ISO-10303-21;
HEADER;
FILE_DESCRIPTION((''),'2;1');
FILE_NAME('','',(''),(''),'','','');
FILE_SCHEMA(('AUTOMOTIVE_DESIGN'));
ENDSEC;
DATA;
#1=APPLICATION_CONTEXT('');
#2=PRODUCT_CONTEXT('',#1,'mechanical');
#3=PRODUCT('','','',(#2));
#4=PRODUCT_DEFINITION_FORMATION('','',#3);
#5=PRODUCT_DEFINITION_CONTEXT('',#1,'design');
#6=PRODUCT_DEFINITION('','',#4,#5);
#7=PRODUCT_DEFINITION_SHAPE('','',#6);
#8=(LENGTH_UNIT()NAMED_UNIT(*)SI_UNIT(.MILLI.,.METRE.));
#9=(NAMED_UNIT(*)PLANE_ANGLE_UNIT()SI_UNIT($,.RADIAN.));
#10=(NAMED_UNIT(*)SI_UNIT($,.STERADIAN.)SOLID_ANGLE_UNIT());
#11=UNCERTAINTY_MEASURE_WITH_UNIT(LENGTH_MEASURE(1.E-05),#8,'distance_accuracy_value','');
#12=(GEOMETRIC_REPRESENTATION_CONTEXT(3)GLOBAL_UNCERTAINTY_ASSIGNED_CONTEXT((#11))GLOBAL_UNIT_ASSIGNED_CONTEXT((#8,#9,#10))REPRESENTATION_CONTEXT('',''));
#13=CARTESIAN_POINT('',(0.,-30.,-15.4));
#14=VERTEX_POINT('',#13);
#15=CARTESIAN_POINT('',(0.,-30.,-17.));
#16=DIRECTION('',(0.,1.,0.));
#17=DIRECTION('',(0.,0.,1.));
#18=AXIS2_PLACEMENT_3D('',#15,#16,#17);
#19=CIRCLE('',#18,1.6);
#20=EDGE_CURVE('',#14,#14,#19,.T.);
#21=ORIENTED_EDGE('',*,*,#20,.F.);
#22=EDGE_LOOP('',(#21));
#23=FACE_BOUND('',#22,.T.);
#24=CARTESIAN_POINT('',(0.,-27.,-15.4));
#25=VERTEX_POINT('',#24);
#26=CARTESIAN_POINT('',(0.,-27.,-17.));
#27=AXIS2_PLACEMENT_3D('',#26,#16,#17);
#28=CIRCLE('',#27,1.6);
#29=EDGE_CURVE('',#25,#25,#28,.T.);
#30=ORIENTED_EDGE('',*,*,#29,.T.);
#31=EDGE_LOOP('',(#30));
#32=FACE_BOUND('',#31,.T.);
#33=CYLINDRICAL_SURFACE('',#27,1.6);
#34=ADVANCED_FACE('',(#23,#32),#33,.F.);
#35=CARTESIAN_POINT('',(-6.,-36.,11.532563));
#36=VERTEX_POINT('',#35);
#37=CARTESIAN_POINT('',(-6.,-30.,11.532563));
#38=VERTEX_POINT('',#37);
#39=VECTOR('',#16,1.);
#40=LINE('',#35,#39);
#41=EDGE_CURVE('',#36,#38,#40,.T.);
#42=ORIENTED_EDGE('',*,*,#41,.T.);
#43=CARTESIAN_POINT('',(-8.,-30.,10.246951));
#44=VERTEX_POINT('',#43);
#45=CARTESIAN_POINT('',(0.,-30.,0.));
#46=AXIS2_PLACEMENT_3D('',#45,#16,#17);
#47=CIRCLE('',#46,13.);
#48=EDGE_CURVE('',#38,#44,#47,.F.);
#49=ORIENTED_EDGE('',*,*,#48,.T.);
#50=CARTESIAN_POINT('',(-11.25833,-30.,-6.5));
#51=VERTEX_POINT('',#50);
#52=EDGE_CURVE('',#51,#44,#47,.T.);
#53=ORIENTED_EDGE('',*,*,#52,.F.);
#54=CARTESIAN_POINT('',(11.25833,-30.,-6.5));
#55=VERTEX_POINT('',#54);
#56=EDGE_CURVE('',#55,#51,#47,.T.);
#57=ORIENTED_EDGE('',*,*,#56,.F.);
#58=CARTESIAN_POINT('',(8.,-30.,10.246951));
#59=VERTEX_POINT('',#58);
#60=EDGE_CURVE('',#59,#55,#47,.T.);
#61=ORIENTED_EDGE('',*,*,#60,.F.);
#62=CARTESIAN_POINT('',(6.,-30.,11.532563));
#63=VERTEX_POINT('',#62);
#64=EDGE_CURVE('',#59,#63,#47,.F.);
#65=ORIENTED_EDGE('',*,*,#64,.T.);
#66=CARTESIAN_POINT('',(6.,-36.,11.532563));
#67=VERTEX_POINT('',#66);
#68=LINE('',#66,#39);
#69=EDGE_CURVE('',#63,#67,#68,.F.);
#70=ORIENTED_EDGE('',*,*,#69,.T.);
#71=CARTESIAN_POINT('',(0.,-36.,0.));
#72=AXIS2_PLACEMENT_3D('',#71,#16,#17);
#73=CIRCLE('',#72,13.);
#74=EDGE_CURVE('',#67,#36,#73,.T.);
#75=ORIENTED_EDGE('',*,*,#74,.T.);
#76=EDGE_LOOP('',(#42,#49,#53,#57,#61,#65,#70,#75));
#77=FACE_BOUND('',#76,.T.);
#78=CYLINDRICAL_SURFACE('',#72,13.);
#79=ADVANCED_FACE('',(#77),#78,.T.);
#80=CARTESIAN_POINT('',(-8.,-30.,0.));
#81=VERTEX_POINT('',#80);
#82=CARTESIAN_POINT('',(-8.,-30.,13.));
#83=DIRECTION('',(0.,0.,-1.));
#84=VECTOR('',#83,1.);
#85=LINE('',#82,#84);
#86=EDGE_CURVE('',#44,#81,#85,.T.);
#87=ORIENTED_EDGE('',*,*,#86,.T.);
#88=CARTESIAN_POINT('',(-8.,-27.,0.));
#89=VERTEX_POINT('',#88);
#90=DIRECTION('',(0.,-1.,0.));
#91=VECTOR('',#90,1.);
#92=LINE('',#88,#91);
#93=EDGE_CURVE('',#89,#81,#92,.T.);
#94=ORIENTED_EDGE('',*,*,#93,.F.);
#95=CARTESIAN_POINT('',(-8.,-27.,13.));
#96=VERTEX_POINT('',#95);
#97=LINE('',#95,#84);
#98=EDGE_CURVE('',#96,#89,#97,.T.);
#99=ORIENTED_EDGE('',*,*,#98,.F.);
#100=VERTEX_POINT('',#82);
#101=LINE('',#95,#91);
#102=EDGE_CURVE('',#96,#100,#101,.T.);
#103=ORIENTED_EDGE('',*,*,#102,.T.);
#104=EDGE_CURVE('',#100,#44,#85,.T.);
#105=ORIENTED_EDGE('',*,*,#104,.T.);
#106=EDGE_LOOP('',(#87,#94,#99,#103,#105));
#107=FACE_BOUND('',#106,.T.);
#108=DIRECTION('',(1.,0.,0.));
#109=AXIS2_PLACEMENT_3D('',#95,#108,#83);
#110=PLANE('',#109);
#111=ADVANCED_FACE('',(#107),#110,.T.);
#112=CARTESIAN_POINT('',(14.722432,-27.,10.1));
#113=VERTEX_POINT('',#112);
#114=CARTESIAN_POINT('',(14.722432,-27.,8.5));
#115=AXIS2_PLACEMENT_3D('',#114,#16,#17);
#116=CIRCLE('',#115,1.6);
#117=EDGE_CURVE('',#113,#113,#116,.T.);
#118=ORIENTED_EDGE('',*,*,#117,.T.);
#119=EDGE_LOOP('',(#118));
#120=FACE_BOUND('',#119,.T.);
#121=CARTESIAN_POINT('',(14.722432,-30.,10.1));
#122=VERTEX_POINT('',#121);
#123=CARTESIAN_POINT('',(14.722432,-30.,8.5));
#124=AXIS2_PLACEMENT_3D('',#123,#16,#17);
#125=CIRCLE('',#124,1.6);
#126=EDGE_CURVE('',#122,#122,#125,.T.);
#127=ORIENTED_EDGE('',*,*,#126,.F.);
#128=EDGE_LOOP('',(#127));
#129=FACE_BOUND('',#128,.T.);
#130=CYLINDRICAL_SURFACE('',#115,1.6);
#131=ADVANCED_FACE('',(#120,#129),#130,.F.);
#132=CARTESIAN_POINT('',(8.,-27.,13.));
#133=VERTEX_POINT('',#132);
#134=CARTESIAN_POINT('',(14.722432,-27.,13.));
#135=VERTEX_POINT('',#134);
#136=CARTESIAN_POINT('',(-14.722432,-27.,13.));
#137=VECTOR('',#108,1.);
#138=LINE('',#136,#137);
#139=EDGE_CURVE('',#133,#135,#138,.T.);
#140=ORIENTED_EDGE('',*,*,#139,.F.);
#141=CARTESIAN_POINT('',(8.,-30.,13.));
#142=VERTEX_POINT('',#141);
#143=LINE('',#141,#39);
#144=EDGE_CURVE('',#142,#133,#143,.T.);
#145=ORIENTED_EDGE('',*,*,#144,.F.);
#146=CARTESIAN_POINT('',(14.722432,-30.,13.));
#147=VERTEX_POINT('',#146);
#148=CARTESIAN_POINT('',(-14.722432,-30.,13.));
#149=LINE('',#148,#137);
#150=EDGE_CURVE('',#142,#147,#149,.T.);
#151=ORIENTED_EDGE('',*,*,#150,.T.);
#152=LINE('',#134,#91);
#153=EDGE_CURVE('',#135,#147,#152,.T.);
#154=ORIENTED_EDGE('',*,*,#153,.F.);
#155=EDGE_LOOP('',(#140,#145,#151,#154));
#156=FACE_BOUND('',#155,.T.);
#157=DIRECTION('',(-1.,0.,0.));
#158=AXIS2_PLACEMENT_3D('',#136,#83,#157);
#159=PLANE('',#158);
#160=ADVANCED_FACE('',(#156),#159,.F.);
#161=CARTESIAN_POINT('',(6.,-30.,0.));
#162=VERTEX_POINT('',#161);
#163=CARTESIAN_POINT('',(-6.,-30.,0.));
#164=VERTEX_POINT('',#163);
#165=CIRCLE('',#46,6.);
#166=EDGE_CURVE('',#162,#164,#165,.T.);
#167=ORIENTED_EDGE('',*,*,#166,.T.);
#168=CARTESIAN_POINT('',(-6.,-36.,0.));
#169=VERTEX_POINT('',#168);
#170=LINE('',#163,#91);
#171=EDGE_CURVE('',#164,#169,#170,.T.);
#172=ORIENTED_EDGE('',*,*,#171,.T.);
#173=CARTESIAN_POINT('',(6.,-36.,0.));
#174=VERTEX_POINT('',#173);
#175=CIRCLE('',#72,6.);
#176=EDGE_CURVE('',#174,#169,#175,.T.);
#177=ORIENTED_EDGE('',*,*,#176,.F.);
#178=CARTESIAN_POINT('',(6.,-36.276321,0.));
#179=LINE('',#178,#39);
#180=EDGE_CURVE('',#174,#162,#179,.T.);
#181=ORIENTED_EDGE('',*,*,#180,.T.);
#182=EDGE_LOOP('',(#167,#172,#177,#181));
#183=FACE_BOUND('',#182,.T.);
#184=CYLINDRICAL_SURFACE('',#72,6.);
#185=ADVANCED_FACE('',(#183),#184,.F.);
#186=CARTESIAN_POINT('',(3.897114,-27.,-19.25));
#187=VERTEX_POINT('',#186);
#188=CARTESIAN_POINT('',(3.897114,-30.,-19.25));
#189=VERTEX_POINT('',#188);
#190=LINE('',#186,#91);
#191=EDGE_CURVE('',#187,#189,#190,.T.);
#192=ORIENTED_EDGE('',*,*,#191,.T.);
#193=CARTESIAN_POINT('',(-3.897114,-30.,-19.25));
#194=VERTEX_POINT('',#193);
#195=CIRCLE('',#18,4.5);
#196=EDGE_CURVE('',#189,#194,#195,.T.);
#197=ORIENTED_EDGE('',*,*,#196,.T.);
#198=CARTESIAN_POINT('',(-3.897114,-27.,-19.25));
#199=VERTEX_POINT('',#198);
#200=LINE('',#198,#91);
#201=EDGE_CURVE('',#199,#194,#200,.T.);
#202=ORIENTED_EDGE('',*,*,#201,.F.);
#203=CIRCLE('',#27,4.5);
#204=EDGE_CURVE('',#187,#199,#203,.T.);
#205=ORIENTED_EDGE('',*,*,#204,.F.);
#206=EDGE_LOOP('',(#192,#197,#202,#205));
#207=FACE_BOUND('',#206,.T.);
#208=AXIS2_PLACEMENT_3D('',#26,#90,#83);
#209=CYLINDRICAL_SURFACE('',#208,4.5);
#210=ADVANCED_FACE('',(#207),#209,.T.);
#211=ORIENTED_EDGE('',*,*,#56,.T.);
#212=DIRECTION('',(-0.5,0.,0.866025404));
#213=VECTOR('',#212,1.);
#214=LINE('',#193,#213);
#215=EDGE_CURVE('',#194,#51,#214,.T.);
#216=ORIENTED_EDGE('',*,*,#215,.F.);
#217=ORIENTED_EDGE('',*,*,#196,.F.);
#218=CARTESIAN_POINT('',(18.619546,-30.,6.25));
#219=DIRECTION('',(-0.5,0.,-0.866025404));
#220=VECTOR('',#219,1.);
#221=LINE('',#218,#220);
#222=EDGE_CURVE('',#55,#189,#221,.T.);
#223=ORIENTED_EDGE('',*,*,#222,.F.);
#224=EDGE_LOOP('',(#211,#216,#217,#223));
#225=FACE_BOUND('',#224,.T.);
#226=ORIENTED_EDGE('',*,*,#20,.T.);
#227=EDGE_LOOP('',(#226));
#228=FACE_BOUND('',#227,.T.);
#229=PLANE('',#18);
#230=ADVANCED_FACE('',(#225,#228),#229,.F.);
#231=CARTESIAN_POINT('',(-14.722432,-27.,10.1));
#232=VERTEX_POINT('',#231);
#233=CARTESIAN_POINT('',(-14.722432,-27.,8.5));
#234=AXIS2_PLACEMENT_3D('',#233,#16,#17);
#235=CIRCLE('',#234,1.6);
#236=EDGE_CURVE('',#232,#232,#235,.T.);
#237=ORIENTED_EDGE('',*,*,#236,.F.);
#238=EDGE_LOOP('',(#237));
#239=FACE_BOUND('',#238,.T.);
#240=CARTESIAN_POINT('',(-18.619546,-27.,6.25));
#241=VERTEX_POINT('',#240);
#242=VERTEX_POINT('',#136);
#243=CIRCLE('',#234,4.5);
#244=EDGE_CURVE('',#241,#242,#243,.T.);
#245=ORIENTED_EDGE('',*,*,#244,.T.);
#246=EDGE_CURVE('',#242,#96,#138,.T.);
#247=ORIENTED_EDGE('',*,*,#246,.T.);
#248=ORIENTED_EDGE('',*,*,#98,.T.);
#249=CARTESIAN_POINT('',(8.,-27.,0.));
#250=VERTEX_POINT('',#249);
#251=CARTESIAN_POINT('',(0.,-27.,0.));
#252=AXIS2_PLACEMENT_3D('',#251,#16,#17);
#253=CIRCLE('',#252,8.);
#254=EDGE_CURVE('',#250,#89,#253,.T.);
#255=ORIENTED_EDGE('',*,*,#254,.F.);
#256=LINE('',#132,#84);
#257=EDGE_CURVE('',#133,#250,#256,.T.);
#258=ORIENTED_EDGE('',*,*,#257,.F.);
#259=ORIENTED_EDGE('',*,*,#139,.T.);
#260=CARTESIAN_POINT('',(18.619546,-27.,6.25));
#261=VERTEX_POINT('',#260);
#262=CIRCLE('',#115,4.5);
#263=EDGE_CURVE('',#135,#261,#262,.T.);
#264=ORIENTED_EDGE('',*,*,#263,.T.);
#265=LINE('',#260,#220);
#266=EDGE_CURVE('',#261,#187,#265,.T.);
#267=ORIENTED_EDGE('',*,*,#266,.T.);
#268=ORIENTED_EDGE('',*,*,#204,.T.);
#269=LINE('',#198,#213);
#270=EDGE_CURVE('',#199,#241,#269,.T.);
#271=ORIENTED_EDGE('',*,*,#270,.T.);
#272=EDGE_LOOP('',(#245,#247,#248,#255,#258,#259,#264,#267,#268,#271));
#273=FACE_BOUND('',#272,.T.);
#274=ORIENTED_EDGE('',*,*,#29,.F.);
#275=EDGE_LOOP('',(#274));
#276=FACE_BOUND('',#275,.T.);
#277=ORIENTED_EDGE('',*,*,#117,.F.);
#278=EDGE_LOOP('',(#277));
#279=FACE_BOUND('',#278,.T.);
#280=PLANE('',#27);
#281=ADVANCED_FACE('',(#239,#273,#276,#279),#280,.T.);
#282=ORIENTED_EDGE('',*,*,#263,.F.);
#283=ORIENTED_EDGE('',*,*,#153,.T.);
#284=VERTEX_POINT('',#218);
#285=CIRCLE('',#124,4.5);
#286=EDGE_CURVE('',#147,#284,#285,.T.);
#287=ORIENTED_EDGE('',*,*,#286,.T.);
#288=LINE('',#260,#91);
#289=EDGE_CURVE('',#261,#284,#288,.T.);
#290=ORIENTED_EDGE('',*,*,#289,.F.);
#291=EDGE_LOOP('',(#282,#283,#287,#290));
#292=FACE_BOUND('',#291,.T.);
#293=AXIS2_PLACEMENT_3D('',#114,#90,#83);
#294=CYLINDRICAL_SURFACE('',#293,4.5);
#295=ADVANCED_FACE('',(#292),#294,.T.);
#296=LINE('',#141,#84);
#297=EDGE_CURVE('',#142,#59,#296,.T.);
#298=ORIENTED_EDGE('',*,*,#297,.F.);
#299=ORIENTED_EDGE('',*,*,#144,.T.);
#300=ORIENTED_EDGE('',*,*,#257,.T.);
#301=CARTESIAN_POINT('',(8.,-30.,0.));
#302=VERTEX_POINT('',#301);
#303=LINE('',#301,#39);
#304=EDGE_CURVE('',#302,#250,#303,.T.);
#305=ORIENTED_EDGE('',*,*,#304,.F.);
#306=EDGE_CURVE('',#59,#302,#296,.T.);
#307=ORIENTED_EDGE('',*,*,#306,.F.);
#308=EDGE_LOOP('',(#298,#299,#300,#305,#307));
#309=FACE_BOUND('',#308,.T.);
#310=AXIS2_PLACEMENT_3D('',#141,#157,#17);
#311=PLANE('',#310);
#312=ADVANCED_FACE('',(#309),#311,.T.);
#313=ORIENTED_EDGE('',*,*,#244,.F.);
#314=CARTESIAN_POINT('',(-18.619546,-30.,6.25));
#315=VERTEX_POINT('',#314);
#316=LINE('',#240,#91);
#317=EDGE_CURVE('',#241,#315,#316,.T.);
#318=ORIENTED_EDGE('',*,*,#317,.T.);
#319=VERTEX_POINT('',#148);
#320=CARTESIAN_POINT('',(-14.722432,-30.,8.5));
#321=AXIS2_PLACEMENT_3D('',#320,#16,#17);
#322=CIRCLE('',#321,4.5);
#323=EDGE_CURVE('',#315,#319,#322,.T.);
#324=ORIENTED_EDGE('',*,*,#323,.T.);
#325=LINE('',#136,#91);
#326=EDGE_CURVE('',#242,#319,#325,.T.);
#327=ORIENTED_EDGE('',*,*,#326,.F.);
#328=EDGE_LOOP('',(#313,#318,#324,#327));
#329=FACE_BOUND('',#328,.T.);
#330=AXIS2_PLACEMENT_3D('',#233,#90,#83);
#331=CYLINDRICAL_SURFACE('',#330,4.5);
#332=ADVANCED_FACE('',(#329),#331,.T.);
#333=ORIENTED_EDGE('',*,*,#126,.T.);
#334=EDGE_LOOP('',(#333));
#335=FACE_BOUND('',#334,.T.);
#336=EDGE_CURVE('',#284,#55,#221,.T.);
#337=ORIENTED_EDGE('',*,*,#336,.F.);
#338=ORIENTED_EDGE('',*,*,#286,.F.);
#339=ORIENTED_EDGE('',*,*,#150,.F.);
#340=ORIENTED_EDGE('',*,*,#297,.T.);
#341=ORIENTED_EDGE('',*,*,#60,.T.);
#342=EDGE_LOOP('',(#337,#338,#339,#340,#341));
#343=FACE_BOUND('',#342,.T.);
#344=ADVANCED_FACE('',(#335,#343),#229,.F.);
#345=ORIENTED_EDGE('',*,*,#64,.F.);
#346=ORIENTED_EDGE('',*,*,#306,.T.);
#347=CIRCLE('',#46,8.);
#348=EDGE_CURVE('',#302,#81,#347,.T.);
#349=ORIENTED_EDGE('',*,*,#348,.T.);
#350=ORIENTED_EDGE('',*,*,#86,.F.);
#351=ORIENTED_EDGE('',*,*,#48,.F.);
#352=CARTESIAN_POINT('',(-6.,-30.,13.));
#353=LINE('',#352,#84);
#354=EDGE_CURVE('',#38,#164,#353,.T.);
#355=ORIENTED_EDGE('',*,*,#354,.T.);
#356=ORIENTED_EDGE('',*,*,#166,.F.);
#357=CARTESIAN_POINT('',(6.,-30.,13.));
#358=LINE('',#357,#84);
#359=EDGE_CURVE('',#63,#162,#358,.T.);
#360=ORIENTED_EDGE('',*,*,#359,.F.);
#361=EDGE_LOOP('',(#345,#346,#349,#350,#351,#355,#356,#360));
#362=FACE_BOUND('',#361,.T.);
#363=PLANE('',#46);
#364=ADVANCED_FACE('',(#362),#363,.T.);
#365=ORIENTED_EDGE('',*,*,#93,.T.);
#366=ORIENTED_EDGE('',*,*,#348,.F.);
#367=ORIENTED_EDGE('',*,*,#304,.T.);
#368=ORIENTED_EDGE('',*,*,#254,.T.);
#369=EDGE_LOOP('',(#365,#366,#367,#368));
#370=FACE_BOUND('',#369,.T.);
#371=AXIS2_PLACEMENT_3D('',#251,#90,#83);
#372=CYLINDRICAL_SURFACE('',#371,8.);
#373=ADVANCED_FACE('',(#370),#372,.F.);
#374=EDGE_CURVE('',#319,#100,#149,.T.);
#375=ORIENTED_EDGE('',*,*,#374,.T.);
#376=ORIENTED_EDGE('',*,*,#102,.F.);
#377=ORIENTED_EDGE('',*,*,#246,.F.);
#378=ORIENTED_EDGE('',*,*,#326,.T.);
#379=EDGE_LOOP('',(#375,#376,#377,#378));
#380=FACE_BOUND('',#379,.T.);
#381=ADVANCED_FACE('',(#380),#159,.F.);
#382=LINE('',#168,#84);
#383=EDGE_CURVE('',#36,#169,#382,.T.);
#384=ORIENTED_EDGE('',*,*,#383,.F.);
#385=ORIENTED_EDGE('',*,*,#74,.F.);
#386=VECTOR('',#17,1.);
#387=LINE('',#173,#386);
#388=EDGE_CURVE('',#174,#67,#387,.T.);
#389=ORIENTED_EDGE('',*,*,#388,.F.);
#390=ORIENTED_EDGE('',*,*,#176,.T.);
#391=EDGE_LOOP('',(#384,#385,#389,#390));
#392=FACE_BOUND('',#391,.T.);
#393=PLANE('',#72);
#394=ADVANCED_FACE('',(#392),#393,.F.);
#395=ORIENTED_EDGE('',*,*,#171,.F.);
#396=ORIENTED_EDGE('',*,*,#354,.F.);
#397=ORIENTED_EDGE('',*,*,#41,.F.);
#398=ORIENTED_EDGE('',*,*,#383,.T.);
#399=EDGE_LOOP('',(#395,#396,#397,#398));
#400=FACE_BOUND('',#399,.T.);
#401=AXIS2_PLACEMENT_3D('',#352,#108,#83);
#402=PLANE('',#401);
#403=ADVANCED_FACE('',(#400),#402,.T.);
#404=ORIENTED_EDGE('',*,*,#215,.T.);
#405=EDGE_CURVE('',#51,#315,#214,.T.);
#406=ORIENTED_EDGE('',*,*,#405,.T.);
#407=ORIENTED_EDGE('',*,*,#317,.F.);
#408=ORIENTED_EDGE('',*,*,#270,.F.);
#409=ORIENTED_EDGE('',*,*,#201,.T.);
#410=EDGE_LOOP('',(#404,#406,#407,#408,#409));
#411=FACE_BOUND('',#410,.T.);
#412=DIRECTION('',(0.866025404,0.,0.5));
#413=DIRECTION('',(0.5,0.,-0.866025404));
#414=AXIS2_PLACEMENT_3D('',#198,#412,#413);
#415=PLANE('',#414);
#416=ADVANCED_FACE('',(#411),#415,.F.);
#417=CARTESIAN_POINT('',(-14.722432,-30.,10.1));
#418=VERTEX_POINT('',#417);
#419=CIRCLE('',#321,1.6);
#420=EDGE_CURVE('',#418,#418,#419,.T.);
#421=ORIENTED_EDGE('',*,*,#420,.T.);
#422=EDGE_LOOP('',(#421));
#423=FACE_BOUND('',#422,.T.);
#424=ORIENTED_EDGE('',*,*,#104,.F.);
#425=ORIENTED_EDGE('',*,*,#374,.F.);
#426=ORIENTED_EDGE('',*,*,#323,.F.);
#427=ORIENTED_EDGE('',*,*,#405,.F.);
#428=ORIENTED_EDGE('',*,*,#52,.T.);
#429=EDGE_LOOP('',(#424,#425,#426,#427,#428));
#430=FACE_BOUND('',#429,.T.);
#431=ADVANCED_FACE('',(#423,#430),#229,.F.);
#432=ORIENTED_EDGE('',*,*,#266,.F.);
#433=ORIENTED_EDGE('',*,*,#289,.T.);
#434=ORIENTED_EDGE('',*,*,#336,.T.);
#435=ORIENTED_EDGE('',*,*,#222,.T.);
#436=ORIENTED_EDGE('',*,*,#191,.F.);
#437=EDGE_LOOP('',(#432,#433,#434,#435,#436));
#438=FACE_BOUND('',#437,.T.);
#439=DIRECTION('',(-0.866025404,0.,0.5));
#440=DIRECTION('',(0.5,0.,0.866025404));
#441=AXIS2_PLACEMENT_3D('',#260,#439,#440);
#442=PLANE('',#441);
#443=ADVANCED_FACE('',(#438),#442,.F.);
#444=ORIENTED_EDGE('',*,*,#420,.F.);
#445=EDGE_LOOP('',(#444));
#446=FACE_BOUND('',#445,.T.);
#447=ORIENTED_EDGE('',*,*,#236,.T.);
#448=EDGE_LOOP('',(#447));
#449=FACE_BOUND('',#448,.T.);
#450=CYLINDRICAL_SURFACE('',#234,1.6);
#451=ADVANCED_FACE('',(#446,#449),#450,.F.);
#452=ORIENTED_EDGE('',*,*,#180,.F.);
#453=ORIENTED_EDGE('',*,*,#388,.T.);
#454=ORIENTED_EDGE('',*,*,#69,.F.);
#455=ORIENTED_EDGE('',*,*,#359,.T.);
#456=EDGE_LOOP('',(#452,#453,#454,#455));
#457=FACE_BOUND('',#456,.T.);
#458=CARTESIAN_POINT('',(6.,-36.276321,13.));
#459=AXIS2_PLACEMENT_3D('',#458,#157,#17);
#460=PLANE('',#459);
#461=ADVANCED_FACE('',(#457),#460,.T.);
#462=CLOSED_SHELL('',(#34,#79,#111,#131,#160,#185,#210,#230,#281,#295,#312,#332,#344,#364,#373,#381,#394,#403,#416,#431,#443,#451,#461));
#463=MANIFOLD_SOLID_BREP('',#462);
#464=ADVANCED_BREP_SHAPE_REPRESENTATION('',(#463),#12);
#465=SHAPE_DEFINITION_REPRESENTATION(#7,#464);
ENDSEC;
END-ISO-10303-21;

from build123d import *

# Parameters (mm, degrees)
SKETCH_1_R          = 13
SKETCH_1_R_2        = 6
EXTRUDE_1_DEPTH     = 6
SKETCH_2_R          = 8
EXTRUDE_2_DEPTH     = 3
CUT_EXTRUDE_1_DEPTH = 47.127561032
OTHER_START         = -30
OTHER_1_OUTLINE_R   = 1.6
OTHER_1_DEPTH       = 3


# Read off the part's stored shape, not the designer's step: 高级异型孔1
with BuildPart() as part:
    # 草图1 → 凸台-拉伸1 (new body)
    with BuildSketch(Plane(origin=(0, -30, 0), x_dir=(1, 0, 0), z_dir=(0, 1, 0))):
        with Locations(Location((0, 0, 0), (0, 0, 270))):
            Circle(SKETCH_1_R)
        with Locations(Location((0, 0, 0), (0, 0, 270))):
            Circle(SKETCH_1_R_2, mode=Mode.SUBTRACT)
    extrude(amount=-EXTRUDE_1_DEPTH)

    # 草图2 → 凸台-拉伸2 (add)
    with BuildSketch(Plane(origin=(0, -30, 0), x_dir=(1, 0, 0), z_dir=(0, 1, 0))):
        with BuildLine():
            Line((-3.897114317, 19.25), (-18.619546181, -6.25))
            ThreePointArc((-18.619546181, -6.25), (-18.619546181, -10.75), (-14.722431864, -13))
            Line((-14.722431864, -13), (14.722431864, -13))
            ThreePointArc((14.722431864, -13), (18.619546181, -10.75), (18.619546181, -6.25))
            Line((18.619546181, -6.25), (3.897114317, 19.25))
            ThreePointArc((3.897114317, 19.25), (0, 21.5), (-3.897114317, 19.25))
        make_face()
        with Locations(Location((0, 0, 0), (0, 0, 270))):
            Circle(SKETCH_2_R, mode=Mode.SUBTRACT)
    extrude(amount=EXTRUDE_2_DEPTH)

    # 草图3 → 切除-拉伸1 (cut, through all)
    with BuildSketch(Plane.XY):
        Polygon((-8, -27), (-8, -30), (-6, -30), (-6, -36.276321086), (6, -36.276321086), (6, -30), (8, -30), (8, -27), align=None)
    extrude(amount=CUT_EXTRUDE_1_DEPTH, mode=Mode.SUBTRACT)

    # 高级异型孔1 outline → 高级异型孔1 (cut)
    with BuildSketch(Plane(origin=(0, 0, 0), x_dir=(1, 0, 0), z_dir=(0, 1, 0)).offset(OTHER_START)):
        with Locations((-14.722431864, -8.5)):
            Circle(OTHER_1_OUTLINE_R)
        with Locations((14.722431864, -8.5)):
            Circle(OTHER_1_OUTLINE_R)
        with Locations((0, 17)):
            Circle(OTHER_1_OUTLINE_R)
    extrude(amount=OTHER_1_DEPTH, mode=Mode.SUBTRACT)


solid = part.part
